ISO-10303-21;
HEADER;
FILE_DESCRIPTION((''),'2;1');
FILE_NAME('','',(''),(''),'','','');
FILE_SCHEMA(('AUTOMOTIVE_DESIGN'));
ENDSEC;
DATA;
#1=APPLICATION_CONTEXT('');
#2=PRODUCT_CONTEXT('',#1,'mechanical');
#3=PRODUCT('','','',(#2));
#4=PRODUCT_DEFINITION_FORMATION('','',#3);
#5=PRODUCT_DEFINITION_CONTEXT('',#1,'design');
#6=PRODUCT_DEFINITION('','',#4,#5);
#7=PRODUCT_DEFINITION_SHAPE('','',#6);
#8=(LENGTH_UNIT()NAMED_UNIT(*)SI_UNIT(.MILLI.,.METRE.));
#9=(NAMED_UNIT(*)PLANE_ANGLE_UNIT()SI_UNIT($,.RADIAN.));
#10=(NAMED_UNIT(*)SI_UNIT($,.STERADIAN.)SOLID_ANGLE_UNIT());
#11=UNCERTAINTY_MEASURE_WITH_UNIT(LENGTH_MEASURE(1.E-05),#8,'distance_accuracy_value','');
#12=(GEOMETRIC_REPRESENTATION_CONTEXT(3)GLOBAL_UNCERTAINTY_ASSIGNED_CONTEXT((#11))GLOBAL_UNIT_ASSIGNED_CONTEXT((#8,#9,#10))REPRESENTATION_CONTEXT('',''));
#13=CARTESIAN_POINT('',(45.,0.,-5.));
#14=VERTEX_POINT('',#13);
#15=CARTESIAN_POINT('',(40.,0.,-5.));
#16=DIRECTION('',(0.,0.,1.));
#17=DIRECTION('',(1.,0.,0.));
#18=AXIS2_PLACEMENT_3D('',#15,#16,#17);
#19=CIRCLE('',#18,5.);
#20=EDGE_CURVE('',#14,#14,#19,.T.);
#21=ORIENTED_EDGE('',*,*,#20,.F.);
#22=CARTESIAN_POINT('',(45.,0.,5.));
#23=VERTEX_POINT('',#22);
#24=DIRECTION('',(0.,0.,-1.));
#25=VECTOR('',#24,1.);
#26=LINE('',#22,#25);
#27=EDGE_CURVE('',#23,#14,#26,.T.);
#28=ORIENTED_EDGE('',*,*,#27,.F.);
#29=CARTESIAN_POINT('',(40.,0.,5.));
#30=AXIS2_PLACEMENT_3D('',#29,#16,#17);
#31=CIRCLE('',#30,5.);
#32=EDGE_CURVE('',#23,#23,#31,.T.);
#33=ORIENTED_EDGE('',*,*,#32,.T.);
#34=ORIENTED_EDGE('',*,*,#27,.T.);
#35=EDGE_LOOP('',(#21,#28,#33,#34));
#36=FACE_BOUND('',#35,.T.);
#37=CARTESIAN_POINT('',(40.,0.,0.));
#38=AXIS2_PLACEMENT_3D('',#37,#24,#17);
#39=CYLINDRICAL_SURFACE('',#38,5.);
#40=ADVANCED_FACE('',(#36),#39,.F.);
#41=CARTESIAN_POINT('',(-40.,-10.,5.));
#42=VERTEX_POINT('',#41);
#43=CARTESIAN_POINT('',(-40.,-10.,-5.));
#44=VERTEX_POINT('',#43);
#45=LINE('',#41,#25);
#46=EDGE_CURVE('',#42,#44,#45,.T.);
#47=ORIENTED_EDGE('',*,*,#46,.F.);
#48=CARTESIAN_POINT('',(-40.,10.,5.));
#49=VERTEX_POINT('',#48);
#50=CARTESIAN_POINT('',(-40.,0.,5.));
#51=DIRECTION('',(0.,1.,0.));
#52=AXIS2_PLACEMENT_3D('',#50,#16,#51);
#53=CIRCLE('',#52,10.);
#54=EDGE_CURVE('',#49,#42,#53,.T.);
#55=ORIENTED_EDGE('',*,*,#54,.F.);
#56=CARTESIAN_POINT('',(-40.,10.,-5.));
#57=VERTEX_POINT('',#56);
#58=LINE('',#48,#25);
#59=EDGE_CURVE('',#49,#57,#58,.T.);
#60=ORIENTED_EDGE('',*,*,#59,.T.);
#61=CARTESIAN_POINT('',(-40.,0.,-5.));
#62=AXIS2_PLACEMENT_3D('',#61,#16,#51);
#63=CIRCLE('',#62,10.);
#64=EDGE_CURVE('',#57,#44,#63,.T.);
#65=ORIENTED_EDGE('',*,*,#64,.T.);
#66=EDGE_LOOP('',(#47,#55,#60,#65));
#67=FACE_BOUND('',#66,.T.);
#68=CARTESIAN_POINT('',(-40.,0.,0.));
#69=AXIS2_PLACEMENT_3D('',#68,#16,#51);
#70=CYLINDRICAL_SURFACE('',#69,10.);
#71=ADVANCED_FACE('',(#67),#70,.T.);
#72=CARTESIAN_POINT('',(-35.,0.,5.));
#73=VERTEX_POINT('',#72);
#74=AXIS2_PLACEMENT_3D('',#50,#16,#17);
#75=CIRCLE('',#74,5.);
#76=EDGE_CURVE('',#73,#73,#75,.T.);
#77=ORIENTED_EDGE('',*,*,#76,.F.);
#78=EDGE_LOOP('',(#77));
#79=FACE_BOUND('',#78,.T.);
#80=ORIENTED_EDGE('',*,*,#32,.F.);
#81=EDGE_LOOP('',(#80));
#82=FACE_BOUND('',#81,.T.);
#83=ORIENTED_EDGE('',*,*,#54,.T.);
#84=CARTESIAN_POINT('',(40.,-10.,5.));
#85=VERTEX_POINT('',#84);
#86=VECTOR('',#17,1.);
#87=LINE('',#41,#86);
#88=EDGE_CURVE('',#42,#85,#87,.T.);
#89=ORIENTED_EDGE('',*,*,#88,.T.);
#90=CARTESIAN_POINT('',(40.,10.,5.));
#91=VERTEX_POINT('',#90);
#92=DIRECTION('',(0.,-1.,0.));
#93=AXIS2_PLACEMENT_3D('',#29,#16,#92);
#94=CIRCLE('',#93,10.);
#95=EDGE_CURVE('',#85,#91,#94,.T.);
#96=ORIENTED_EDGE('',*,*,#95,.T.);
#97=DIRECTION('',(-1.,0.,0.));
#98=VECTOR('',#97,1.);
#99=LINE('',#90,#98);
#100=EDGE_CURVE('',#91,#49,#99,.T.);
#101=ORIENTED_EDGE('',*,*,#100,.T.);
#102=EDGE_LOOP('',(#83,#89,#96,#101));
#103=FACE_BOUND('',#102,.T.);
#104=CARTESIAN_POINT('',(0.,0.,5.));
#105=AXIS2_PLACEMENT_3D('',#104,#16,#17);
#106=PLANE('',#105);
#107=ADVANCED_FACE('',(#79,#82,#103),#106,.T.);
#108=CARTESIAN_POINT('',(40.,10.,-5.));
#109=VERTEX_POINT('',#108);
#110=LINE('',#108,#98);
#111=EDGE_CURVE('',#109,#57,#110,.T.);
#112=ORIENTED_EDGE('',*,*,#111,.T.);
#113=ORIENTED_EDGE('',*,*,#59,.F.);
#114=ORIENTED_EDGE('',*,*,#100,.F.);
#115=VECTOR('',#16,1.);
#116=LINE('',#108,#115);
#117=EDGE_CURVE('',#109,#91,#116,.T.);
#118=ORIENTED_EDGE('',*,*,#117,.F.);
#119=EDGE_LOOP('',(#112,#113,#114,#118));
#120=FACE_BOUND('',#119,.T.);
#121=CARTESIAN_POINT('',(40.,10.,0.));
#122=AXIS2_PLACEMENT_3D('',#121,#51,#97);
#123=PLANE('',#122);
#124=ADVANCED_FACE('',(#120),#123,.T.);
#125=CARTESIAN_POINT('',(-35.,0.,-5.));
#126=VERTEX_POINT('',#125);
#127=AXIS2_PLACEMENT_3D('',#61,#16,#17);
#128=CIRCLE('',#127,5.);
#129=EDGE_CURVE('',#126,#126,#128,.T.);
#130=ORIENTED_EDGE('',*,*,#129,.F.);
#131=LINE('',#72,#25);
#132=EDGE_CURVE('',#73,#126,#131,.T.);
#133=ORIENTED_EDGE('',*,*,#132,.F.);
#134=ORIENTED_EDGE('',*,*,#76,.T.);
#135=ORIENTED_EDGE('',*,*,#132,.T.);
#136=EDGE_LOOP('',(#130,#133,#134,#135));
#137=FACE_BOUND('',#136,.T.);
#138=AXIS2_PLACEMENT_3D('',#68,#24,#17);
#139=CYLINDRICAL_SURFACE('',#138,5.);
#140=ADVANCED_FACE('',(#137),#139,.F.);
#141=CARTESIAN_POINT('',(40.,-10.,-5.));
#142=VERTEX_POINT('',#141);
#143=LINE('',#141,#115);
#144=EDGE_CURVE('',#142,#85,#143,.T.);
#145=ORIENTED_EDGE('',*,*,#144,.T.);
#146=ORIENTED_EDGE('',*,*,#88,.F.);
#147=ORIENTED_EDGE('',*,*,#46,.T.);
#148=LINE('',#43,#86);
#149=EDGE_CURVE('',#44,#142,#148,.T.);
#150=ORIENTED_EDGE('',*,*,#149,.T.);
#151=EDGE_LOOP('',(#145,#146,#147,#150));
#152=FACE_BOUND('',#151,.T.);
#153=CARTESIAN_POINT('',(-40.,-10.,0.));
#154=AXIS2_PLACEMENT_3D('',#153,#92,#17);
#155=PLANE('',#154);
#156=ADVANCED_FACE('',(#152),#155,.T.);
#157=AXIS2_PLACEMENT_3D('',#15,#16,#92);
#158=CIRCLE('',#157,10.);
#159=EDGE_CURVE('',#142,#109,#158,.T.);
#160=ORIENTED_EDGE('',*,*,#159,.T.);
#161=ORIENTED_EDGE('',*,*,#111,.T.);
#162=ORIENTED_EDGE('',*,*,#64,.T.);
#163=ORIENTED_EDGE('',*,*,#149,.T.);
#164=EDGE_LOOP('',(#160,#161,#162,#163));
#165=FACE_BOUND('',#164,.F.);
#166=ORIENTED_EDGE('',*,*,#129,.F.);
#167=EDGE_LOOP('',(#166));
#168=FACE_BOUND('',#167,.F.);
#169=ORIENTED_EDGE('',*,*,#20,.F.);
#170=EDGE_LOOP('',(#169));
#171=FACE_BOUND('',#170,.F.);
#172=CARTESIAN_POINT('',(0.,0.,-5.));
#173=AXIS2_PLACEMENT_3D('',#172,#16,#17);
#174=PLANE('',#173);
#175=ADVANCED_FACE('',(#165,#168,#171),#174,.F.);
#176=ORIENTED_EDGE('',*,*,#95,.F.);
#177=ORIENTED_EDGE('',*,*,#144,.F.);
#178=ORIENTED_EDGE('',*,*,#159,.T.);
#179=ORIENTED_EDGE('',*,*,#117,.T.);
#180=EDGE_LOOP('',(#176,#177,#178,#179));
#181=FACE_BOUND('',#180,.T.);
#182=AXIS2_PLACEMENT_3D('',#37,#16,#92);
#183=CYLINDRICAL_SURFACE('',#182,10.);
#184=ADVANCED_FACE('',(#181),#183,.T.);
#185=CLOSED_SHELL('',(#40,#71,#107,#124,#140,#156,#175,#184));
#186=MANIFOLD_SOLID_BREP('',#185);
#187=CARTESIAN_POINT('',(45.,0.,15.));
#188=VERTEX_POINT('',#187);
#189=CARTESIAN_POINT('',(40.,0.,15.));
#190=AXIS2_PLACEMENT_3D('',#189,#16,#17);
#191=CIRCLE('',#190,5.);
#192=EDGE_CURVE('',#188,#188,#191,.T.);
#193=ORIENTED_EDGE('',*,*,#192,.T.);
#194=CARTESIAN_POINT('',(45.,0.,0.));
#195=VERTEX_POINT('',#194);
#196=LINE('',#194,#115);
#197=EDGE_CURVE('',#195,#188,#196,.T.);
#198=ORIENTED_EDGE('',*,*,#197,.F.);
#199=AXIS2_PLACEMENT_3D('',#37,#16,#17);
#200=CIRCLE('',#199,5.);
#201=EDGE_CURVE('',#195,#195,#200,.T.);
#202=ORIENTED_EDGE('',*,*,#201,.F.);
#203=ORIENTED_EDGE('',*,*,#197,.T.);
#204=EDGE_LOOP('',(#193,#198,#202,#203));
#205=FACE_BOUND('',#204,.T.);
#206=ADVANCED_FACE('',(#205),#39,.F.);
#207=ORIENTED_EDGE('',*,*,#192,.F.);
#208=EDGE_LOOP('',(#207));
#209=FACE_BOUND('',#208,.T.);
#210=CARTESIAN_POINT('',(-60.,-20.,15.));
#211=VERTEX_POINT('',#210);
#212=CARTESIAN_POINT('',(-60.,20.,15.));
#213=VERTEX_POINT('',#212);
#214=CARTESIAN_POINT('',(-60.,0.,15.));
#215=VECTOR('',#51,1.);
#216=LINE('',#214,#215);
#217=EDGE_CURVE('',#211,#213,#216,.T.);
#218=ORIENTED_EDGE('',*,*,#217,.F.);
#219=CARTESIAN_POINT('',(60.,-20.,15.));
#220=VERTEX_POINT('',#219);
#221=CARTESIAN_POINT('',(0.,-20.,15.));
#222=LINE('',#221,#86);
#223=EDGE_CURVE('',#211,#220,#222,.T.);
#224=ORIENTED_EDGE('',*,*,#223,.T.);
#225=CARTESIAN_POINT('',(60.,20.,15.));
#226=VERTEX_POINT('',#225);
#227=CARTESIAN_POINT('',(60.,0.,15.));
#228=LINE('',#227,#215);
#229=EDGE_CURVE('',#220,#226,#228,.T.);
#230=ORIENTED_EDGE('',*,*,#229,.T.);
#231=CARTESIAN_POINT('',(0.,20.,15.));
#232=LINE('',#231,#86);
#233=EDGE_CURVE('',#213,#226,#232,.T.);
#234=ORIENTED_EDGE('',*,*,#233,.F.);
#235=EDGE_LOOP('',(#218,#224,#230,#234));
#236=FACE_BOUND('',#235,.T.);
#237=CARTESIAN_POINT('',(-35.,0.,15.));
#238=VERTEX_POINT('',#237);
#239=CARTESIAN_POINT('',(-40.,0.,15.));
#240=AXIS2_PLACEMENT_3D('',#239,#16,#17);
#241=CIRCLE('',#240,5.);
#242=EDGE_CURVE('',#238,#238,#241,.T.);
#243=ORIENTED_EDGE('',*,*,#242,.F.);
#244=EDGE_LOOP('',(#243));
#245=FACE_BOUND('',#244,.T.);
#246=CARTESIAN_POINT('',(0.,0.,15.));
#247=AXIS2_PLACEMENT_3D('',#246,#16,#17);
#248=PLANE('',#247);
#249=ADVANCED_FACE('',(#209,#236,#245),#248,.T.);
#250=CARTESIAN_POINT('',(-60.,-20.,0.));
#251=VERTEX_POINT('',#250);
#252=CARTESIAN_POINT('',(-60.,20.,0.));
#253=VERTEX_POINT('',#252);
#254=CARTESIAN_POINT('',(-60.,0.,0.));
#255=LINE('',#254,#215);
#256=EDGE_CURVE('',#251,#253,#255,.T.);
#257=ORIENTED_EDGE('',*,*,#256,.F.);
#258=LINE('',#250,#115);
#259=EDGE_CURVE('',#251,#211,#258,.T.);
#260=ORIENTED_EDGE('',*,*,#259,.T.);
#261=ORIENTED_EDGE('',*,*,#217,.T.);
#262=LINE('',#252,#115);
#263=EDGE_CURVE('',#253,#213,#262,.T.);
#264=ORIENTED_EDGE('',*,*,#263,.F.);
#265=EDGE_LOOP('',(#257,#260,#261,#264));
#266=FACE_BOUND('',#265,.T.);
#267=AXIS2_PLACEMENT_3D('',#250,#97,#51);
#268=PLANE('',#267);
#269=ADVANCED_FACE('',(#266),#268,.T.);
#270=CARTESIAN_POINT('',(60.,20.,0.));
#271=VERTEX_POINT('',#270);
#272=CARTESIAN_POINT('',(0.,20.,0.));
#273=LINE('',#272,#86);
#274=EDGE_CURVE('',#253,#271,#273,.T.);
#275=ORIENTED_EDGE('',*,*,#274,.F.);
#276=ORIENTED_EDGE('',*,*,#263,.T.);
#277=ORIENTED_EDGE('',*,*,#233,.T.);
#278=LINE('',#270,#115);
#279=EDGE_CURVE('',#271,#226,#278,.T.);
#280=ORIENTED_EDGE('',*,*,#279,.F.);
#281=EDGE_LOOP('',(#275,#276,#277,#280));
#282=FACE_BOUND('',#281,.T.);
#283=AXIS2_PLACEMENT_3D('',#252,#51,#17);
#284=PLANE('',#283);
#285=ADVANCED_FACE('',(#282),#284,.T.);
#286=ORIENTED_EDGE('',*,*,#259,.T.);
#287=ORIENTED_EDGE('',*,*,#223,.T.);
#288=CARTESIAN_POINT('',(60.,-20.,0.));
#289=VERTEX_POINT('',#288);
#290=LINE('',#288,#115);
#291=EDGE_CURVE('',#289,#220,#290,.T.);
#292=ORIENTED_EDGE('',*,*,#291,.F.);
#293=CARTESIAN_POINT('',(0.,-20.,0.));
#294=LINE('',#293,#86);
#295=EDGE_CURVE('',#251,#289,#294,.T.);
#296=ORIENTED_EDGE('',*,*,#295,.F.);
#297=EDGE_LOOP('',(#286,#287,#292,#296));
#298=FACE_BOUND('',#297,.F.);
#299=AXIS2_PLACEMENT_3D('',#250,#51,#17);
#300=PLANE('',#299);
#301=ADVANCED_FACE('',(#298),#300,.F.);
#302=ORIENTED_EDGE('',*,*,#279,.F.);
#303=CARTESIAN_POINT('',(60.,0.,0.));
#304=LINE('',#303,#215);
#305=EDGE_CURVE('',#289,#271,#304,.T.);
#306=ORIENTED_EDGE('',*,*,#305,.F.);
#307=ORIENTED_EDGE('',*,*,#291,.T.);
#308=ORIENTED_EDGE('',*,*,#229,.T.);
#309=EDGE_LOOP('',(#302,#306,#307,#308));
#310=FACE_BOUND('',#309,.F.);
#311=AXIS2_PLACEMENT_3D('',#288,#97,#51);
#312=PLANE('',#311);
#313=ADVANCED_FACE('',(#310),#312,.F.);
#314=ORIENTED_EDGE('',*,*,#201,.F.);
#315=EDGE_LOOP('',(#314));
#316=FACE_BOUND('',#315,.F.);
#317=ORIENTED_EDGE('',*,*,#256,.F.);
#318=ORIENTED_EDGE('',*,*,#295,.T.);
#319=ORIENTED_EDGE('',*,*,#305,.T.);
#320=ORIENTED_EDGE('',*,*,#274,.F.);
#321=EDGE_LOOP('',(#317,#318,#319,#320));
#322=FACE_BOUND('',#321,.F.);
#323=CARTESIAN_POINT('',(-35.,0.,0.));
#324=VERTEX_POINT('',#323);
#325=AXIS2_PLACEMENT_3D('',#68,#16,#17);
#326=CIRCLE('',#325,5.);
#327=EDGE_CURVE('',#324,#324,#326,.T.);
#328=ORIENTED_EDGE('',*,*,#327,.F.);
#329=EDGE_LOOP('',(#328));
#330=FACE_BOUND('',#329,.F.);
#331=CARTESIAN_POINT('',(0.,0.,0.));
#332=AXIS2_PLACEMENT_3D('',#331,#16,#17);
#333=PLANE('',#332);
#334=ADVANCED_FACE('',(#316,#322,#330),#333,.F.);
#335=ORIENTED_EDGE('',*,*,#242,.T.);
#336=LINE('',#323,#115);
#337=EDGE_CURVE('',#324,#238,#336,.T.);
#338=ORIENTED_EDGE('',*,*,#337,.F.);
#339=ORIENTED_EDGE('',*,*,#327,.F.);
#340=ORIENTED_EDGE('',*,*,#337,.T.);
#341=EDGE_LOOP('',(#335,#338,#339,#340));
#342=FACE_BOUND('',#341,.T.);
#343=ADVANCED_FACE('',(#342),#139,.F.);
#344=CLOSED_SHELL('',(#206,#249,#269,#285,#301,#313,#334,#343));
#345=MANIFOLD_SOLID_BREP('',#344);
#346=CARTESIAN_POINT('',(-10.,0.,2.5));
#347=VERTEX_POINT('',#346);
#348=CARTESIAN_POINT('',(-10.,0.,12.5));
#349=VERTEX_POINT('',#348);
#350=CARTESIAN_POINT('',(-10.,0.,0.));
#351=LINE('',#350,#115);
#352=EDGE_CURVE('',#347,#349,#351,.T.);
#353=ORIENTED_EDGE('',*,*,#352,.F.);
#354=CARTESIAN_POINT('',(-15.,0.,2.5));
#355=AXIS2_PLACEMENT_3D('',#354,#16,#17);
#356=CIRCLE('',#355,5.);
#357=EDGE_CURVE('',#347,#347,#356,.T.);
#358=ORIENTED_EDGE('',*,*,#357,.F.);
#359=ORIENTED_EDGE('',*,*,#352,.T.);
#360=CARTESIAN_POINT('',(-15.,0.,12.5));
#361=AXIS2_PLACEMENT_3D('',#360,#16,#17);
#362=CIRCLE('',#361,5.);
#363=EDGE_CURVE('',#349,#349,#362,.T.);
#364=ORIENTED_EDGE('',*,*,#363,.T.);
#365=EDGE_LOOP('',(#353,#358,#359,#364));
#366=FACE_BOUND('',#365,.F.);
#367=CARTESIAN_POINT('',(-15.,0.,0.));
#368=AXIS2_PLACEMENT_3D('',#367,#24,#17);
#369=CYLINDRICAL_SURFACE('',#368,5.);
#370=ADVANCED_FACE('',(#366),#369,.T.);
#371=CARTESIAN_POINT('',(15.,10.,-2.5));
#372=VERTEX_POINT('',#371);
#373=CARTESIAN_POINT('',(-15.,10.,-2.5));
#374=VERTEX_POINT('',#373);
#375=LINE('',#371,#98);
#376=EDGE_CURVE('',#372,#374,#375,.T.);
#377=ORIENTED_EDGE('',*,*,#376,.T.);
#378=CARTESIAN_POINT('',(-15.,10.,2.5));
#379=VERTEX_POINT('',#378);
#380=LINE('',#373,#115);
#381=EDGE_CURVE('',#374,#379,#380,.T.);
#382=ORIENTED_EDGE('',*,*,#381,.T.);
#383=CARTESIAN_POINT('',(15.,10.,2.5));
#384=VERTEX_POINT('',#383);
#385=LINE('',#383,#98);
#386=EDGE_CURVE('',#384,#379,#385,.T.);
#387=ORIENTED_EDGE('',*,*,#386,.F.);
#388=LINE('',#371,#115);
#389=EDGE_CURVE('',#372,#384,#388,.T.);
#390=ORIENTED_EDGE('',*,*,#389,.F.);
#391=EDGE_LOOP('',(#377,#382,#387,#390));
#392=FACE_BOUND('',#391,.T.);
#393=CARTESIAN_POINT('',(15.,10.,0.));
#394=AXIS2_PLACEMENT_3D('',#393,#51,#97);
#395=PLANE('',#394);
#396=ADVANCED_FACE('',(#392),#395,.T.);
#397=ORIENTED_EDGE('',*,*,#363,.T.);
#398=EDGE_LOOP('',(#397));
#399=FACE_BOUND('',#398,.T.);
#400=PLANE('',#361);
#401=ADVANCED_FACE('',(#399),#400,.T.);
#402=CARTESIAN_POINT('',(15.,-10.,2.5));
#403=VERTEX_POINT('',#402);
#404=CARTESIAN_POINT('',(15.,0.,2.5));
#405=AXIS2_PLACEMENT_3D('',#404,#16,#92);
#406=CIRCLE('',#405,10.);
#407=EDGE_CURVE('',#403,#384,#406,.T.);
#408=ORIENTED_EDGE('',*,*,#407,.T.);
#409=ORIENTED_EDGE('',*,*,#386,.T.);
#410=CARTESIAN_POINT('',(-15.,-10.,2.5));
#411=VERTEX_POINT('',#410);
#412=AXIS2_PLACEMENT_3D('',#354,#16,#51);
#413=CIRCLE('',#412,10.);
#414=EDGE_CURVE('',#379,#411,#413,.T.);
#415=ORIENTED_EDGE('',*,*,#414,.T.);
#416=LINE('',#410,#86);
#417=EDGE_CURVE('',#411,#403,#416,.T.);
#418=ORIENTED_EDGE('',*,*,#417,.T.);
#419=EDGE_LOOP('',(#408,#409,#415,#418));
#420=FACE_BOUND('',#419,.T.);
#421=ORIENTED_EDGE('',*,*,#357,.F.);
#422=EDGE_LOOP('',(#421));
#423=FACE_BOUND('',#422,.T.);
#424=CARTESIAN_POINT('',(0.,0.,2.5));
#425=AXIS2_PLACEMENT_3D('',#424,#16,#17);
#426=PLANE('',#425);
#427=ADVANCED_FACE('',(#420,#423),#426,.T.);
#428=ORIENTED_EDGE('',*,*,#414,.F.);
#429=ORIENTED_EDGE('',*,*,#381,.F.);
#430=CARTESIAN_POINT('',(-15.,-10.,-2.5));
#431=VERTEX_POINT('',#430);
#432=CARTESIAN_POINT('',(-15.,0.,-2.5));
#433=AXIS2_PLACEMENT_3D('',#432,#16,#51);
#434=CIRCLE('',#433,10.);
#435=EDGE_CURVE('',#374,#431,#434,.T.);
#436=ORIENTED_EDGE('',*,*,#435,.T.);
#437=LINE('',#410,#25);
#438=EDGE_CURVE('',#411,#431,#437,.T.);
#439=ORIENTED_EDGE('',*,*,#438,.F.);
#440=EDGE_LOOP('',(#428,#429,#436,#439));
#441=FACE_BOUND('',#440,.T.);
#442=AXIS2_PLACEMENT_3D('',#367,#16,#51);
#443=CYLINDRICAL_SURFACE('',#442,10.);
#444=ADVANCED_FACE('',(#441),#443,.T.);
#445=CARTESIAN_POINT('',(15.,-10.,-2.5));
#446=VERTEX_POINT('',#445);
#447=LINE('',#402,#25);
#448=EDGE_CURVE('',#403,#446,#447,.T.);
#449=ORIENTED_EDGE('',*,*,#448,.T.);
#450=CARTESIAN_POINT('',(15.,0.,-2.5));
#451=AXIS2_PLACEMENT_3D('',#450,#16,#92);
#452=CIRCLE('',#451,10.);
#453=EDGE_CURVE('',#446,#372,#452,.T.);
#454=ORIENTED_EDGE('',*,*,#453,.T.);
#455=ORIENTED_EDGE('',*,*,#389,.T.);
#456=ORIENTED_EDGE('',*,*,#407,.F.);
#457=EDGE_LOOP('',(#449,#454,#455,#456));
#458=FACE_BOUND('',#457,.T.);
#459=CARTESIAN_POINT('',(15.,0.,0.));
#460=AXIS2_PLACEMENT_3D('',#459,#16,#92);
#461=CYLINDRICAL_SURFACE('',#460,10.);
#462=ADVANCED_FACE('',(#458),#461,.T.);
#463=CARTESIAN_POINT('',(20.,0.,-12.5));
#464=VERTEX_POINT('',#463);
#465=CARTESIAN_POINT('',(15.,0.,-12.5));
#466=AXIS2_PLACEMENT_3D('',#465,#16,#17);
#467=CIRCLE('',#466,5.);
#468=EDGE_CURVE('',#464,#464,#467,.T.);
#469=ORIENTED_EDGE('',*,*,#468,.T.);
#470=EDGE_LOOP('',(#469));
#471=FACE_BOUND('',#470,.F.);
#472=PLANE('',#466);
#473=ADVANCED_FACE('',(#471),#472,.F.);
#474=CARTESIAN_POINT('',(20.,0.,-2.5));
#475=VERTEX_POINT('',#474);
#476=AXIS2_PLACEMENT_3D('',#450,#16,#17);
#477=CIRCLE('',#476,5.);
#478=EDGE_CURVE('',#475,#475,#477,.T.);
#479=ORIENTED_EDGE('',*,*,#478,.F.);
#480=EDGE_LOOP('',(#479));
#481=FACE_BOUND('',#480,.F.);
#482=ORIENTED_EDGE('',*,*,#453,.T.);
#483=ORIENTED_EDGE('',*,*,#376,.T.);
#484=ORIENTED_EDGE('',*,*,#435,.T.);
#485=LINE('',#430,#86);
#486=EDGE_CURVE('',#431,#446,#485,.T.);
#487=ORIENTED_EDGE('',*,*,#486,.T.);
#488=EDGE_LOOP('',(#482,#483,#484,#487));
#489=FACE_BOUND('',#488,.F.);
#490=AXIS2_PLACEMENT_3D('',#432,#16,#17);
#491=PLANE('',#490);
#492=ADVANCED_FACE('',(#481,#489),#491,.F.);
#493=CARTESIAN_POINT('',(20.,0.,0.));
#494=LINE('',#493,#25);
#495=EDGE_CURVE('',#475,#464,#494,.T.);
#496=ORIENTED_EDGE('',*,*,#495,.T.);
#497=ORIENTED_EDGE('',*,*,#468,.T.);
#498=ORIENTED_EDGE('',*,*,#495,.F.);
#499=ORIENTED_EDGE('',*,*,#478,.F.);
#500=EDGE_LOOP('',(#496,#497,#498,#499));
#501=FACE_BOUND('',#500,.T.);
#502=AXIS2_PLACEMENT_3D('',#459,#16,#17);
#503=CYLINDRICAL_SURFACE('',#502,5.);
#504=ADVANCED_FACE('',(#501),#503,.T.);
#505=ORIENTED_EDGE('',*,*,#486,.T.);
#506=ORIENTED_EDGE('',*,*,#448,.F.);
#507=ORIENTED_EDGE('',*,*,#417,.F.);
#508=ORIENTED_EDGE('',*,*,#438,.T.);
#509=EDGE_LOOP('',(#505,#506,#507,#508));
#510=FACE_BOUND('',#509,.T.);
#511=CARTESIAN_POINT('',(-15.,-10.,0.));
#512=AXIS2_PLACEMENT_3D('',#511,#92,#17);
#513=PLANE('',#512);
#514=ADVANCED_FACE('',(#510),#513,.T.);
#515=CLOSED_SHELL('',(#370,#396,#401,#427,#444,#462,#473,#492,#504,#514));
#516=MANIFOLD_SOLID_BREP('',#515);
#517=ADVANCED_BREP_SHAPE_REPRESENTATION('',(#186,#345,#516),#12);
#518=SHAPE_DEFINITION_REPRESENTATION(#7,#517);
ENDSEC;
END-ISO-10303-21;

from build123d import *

# Parameters (mm, degrees)
F0_W          = 120
F0_H          = 40
F0_R          = 5
F1_DEPTH      = 15
F2_R          = 5
F3_DEPTH      = 2.5
F4_DEPTH      = 12.5
F4_DEPTH_BACK = 2.5
F5_DEPTH      = 2.5
F5_DEPTH_BACK = 12.5
F6_R          = 5
F7_DEPTH      = 5


with BuildPart() as f1:
    # F0 (on Top) → F1 (new body)
    with BuildSketch(Plane.XY):
        Rectangle(F0_W, F0_H)
        with Locations((-40, 0)):
            Circle(F0_R, mode=Mode.SUBTRACT)
        with Locations((40, 0)):
            Circle(F0_R, mode=Mode.SUBTRACT)
    extrude(amount=F1_DEPTH)


with BuildPart() as f3:
    # F2 (on Top) → F3 (new body, symmetric)
    with BuildSketch(Plane.XY):
        with BuildLine():
            ThreePointArc((15, -10), (25, 0), (15, 10))
            Line((15, 10), (-15, 10))
            ThreePointArc((-15, 10), (-25, 0), (-15, -10))
            Line((-15, -10), (15, -10))
        make_face()
        with Locations((-15, 0)):
            Circle(F2_R, mode=Mode.SUBTRACT)
        with Locations((15, 0)):
            Circle(F2_R, mode=Mode.SUBTRACT)
    extrude(amount=F3_DEPTH, both=True)

    # F2 (on Top) → F4 (join, two sides)
    with BuildSketch(Plane.XY) as f4_sk:
        with Locations((-15, 0)):
            Circle(F2_R)
    extrude(amount=F4_DEPTH)
    extrude(f4_sk.sketch, amount=-F4_DEPTH_BACK)

    # F2 (on Top) → F5 (join, two sides)
    with BuildSketch(Plane.XY) as f5_sk:
        with Locations((15, 0)):
            Circle(F2_R)
    extrude(amount=F5_DEPTH)
    extrude(f5_sk.sketch, amount=-F5_DEPTH_BACK)


with BuildPart() as f7:
    # F6 (on Top) → F7 (new body, symmetric)
    with BuildSketch(Plane.XY):
        with BuildLine():
            Line((-40, -10), (40, -10))
            ThreePointArc((40, -10), (50, 0), (40, 10))
            Line((40, 10), (-40, 10))
            ThreePointArc((-40, 10), (-50, 0), (-40, -10))
        make_face()
        with Locations((-40, 0)):
            Circle(F6_R, mode=Mode.SUBTRACT)
        with Locations((40, 0)):
            Circle(F6_R, mode=Mode.SUBTRACT)
    extrude(amount=F7_DEPTH, both=True)


solid = Compound([f1.part, f3.part, f7.part])
